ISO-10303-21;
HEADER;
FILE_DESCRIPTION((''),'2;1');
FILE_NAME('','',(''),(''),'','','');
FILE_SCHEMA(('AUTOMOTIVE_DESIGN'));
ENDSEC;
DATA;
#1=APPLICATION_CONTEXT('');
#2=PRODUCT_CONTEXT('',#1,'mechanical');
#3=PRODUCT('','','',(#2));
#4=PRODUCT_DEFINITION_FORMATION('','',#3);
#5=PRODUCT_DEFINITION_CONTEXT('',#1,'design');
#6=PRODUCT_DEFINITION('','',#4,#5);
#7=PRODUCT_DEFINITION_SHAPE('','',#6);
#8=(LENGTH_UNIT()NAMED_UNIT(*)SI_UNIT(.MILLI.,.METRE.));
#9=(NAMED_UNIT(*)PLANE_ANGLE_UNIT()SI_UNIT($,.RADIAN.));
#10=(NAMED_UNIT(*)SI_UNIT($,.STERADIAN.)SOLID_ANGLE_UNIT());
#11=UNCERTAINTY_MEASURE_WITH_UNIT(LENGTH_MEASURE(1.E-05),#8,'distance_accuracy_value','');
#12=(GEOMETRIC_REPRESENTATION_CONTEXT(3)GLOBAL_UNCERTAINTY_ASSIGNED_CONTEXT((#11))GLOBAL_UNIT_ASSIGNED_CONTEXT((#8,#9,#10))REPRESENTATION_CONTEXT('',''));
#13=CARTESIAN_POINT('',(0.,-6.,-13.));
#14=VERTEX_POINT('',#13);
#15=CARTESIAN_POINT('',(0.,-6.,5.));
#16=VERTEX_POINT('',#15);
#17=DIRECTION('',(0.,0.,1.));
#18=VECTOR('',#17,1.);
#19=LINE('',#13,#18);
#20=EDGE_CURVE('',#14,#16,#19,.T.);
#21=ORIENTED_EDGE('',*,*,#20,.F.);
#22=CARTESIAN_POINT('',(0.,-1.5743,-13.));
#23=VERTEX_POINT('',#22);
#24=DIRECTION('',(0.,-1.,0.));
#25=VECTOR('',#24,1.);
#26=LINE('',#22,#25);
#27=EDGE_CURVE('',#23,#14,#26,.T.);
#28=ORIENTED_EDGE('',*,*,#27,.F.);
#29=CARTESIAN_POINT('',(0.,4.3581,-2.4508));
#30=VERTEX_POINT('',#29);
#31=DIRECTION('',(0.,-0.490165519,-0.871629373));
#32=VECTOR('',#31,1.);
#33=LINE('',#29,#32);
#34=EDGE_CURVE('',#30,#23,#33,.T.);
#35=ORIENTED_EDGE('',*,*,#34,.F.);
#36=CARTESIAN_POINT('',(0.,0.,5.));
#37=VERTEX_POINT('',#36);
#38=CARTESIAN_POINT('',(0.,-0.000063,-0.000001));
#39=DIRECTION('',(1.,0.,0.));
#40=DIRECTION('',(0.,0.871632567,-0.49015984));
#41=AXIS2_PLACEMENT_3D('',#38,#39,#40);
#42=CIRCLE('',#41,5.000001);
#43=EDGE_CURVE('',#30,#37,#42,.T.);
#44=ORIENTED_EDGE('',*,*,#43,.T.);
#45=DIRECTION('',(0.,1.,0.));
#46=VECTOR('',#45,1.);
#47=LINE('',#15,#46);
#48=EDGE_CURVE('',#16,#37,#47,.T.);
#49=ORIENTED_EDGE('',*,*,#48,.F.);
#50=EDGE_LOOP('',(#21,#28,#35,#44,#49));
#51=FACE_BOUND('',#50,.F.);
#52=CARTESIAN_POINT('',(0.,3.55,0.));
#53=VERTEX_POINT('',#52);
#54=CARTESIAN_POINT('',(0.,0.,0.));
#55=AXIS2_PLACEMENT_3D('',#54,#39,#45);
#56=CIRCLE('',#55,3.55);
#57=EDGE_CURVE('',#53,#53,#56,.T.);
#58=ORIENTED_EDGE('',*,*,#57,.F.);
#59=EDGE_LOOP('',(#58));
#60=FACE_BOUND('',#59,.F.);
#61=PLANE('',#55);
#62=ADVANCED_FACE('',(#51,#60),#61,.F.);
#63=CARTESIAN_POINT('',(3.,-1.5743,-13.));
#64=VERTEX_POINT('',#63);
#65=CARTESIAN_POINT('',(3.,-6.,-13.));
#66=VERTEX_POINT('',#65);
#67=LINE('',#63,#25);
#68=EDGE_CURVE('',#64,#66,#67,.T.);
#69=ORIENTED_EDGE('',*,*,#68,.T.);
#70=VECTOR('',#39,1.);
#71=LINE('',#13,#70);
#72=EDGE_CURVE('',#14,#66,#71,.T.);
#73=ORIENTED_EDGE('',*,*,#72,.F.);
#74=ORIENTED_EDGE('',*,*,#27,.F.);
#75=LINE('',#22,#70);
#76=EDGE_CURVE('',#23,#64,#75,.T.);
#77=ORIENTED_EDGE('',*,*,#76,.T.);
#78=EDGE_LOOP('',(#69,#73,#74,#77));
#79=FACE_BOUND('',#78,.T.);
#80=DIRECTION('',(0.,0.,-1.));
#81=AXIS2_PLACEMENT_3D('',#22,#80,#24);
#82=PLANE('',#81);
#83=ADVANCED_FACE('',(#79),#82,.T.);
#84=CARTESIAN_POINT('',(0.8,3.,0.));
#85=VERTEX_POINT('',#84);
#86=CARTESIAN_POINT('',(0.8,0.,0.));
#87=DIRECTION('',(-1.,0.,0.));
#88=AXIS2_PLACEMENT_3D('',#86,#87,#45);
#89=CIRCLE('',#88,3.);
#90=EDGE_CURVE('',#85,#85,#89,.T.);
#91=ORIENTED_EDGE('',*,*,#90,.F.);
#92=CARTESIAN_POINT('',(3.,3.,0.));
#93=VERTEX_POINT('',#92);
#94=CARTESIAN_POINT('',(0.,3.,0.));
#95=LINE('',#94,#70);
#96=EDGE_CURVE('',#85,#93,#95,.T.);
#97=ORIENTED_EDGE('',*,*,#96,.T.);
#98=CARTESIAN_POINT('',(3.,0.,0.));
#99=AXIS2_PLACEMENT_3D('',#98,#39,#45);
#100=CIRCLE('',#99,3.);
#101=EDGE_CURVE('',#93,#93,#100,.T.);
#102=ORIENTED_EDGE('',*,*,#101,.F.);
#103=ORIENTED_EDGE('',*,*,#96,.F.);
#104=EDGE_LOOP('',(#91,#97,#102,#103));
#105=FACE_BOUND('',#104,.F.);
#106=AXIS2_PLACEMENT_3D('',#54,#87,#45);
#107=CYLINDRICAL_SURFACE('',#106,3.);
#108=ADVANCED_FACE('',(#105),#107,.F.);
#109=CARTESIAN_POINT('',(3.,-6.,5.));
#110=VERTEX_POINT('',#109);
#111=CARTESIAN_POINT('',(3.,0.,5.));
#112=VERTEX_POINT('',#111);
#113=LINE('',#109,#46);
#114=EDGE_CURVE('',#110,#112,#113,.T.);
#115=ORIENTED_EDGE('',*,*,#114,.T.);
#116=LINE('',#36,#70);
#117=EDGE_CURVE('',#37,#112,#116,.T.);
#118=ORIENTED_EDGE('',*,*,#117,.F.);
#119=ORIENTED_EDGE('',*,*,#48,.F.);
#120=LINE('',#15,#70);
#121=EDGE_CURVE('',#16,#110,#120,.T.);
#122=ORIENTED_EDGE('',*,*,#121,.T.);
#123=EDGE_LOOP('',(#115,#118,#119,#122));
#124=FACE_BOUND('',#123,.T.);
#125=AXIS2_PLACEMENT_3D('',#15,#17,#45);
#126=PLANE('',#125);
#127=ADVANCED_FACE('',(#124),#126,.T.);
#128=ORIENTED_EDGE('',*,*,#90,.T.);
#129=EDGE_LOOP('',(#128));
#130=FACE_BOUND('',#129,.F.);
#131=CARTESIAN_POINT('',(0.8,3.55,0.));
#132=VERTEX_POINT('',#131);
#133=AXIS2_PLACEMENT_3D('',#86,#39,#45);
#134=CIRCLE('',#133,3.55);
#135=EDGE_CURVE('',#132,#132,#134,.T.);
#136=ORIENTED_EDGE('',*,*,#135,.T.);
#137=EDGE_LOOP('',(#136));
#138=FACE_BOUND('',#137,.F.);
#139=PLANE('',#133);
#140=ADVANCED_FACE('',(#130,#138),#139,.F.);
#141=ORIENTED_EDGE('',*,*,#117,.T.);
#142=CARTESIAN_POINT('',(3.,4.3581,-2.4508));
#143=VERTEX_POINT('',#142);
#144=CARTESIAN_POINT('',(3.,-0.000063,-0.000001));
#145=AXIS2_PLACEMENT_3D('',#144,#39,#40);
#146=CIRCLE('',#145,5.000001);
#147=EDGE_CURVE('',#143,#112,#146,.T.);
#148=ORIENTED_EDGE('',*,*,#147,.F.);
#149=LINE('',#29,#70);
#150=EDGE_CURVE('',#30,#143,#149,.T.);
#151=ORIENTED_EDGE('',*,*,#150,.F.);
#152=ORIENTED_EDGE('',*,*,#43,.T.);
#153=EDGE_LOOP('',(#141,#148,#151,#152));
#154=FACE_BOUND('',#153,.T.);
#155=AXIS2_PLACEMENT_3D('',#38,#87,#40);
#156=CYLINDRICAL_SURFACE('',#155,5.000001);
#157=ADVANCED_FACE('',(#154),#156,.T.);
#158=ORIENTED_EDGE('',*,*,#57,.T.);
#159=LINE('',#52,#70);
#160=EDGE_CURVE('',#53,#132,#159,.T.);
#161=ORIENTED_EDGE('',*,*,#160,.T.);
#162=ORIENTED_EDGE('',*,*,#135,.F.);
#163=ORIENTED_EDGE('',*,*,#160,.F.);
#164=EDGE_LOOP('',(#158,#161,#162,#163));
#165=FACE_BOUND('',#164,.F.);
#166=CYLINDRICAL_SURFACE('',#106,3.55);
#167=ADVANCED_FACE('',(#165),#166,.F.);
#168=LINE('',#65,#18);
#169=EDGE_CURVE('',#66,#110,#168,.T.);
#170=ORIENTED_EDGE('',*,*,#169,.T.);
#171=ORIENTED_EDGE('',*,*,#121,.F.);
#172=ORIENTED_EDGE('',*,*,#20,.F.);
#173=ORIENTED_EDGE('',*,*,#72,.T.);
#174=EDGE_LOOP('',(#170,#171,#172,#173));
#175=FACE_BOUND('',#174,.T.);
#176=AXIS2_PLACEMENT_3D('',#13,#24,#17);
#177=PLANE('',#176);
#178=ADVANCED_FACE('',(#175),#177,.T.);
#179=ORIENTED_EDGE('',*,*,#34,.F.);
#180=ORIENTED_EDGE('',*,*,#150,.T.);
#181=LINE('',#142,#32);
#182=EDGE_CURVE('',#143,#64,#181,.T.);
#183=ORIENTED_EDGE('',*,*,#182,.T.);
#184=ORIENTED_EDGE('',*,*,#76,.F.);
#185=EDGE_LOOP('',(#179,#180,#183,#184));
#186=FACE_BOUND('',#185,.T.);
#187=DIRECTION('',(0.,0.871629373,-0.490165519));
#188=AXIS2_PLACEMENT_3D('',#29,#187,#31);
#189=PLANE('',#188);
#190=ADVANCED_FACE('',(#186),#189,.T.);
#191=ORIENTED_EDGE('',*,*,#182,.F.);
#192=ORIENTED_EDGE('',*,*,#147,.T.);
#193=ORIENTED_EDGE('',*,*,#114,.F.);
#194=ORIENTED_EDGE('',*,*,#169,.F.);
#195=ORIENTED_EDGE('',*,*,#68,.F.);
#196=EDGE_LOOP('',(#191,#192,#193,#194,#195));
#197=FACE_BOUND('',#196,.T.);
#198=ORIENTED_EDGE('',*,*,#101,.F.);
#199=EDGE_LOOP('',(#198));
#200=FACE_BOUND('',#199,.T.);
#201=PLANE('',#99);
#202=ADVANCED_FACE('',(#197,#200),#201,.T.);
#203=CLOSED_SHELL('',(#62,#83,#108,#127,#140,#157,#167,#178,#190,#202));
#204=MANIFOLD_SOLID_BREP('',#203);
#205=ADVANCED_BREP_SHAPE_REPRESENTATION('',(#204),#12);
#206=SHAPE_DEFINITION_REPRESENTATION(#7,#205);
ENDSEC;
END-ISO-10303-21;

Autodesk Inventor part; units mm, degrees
ref_plane "YZ Plane" through (0, 0, 0) normal (1, 0, 0) x (0, 1, 0)
ref_plane "XZ Plane" through (0, 0, 0) normal (0, 1, 0) x (-1, 0, 0)
ref_plane "XY Plane" through (0, 0, 0) normal (0, 0, 1) x (1, 0, 0)
sketch "スケッチ1" plane through (0, 0, 0) normal (1, 0, 0) x (0, 1, 0)
  circle A0 centre (0, 0) radius 3.55
  arc A1 (4.3581, -2.4508) -> (0, 5) centre (0, 0) ccw
  line L0 (4.3581, -2.4508) -> (-1.5743, -13)
  line L1 (-1.5743, -13) -> (-6, -13)
  line L2 (-6, -13) -> (-6, 5)
  line L3 (-6, 5) -> (0, 5)
  circle A2 centre (0, 0) radius 3
  dimension "d0" = 7.1
  dimension "d1" = 5
  dimension "d2" = 18
  dimension "d3" = 6
  dimension "d6" = 6
extrude "押し出し1" add sketch "スケッチ1" along normal blind 3 contours A0 | L0 L1 L2 L3 A1
extrude "押し出し2" cut sketch "スケッチ1" along normal blind 0.8 contours A0 | A2
properties part number "Stand"
